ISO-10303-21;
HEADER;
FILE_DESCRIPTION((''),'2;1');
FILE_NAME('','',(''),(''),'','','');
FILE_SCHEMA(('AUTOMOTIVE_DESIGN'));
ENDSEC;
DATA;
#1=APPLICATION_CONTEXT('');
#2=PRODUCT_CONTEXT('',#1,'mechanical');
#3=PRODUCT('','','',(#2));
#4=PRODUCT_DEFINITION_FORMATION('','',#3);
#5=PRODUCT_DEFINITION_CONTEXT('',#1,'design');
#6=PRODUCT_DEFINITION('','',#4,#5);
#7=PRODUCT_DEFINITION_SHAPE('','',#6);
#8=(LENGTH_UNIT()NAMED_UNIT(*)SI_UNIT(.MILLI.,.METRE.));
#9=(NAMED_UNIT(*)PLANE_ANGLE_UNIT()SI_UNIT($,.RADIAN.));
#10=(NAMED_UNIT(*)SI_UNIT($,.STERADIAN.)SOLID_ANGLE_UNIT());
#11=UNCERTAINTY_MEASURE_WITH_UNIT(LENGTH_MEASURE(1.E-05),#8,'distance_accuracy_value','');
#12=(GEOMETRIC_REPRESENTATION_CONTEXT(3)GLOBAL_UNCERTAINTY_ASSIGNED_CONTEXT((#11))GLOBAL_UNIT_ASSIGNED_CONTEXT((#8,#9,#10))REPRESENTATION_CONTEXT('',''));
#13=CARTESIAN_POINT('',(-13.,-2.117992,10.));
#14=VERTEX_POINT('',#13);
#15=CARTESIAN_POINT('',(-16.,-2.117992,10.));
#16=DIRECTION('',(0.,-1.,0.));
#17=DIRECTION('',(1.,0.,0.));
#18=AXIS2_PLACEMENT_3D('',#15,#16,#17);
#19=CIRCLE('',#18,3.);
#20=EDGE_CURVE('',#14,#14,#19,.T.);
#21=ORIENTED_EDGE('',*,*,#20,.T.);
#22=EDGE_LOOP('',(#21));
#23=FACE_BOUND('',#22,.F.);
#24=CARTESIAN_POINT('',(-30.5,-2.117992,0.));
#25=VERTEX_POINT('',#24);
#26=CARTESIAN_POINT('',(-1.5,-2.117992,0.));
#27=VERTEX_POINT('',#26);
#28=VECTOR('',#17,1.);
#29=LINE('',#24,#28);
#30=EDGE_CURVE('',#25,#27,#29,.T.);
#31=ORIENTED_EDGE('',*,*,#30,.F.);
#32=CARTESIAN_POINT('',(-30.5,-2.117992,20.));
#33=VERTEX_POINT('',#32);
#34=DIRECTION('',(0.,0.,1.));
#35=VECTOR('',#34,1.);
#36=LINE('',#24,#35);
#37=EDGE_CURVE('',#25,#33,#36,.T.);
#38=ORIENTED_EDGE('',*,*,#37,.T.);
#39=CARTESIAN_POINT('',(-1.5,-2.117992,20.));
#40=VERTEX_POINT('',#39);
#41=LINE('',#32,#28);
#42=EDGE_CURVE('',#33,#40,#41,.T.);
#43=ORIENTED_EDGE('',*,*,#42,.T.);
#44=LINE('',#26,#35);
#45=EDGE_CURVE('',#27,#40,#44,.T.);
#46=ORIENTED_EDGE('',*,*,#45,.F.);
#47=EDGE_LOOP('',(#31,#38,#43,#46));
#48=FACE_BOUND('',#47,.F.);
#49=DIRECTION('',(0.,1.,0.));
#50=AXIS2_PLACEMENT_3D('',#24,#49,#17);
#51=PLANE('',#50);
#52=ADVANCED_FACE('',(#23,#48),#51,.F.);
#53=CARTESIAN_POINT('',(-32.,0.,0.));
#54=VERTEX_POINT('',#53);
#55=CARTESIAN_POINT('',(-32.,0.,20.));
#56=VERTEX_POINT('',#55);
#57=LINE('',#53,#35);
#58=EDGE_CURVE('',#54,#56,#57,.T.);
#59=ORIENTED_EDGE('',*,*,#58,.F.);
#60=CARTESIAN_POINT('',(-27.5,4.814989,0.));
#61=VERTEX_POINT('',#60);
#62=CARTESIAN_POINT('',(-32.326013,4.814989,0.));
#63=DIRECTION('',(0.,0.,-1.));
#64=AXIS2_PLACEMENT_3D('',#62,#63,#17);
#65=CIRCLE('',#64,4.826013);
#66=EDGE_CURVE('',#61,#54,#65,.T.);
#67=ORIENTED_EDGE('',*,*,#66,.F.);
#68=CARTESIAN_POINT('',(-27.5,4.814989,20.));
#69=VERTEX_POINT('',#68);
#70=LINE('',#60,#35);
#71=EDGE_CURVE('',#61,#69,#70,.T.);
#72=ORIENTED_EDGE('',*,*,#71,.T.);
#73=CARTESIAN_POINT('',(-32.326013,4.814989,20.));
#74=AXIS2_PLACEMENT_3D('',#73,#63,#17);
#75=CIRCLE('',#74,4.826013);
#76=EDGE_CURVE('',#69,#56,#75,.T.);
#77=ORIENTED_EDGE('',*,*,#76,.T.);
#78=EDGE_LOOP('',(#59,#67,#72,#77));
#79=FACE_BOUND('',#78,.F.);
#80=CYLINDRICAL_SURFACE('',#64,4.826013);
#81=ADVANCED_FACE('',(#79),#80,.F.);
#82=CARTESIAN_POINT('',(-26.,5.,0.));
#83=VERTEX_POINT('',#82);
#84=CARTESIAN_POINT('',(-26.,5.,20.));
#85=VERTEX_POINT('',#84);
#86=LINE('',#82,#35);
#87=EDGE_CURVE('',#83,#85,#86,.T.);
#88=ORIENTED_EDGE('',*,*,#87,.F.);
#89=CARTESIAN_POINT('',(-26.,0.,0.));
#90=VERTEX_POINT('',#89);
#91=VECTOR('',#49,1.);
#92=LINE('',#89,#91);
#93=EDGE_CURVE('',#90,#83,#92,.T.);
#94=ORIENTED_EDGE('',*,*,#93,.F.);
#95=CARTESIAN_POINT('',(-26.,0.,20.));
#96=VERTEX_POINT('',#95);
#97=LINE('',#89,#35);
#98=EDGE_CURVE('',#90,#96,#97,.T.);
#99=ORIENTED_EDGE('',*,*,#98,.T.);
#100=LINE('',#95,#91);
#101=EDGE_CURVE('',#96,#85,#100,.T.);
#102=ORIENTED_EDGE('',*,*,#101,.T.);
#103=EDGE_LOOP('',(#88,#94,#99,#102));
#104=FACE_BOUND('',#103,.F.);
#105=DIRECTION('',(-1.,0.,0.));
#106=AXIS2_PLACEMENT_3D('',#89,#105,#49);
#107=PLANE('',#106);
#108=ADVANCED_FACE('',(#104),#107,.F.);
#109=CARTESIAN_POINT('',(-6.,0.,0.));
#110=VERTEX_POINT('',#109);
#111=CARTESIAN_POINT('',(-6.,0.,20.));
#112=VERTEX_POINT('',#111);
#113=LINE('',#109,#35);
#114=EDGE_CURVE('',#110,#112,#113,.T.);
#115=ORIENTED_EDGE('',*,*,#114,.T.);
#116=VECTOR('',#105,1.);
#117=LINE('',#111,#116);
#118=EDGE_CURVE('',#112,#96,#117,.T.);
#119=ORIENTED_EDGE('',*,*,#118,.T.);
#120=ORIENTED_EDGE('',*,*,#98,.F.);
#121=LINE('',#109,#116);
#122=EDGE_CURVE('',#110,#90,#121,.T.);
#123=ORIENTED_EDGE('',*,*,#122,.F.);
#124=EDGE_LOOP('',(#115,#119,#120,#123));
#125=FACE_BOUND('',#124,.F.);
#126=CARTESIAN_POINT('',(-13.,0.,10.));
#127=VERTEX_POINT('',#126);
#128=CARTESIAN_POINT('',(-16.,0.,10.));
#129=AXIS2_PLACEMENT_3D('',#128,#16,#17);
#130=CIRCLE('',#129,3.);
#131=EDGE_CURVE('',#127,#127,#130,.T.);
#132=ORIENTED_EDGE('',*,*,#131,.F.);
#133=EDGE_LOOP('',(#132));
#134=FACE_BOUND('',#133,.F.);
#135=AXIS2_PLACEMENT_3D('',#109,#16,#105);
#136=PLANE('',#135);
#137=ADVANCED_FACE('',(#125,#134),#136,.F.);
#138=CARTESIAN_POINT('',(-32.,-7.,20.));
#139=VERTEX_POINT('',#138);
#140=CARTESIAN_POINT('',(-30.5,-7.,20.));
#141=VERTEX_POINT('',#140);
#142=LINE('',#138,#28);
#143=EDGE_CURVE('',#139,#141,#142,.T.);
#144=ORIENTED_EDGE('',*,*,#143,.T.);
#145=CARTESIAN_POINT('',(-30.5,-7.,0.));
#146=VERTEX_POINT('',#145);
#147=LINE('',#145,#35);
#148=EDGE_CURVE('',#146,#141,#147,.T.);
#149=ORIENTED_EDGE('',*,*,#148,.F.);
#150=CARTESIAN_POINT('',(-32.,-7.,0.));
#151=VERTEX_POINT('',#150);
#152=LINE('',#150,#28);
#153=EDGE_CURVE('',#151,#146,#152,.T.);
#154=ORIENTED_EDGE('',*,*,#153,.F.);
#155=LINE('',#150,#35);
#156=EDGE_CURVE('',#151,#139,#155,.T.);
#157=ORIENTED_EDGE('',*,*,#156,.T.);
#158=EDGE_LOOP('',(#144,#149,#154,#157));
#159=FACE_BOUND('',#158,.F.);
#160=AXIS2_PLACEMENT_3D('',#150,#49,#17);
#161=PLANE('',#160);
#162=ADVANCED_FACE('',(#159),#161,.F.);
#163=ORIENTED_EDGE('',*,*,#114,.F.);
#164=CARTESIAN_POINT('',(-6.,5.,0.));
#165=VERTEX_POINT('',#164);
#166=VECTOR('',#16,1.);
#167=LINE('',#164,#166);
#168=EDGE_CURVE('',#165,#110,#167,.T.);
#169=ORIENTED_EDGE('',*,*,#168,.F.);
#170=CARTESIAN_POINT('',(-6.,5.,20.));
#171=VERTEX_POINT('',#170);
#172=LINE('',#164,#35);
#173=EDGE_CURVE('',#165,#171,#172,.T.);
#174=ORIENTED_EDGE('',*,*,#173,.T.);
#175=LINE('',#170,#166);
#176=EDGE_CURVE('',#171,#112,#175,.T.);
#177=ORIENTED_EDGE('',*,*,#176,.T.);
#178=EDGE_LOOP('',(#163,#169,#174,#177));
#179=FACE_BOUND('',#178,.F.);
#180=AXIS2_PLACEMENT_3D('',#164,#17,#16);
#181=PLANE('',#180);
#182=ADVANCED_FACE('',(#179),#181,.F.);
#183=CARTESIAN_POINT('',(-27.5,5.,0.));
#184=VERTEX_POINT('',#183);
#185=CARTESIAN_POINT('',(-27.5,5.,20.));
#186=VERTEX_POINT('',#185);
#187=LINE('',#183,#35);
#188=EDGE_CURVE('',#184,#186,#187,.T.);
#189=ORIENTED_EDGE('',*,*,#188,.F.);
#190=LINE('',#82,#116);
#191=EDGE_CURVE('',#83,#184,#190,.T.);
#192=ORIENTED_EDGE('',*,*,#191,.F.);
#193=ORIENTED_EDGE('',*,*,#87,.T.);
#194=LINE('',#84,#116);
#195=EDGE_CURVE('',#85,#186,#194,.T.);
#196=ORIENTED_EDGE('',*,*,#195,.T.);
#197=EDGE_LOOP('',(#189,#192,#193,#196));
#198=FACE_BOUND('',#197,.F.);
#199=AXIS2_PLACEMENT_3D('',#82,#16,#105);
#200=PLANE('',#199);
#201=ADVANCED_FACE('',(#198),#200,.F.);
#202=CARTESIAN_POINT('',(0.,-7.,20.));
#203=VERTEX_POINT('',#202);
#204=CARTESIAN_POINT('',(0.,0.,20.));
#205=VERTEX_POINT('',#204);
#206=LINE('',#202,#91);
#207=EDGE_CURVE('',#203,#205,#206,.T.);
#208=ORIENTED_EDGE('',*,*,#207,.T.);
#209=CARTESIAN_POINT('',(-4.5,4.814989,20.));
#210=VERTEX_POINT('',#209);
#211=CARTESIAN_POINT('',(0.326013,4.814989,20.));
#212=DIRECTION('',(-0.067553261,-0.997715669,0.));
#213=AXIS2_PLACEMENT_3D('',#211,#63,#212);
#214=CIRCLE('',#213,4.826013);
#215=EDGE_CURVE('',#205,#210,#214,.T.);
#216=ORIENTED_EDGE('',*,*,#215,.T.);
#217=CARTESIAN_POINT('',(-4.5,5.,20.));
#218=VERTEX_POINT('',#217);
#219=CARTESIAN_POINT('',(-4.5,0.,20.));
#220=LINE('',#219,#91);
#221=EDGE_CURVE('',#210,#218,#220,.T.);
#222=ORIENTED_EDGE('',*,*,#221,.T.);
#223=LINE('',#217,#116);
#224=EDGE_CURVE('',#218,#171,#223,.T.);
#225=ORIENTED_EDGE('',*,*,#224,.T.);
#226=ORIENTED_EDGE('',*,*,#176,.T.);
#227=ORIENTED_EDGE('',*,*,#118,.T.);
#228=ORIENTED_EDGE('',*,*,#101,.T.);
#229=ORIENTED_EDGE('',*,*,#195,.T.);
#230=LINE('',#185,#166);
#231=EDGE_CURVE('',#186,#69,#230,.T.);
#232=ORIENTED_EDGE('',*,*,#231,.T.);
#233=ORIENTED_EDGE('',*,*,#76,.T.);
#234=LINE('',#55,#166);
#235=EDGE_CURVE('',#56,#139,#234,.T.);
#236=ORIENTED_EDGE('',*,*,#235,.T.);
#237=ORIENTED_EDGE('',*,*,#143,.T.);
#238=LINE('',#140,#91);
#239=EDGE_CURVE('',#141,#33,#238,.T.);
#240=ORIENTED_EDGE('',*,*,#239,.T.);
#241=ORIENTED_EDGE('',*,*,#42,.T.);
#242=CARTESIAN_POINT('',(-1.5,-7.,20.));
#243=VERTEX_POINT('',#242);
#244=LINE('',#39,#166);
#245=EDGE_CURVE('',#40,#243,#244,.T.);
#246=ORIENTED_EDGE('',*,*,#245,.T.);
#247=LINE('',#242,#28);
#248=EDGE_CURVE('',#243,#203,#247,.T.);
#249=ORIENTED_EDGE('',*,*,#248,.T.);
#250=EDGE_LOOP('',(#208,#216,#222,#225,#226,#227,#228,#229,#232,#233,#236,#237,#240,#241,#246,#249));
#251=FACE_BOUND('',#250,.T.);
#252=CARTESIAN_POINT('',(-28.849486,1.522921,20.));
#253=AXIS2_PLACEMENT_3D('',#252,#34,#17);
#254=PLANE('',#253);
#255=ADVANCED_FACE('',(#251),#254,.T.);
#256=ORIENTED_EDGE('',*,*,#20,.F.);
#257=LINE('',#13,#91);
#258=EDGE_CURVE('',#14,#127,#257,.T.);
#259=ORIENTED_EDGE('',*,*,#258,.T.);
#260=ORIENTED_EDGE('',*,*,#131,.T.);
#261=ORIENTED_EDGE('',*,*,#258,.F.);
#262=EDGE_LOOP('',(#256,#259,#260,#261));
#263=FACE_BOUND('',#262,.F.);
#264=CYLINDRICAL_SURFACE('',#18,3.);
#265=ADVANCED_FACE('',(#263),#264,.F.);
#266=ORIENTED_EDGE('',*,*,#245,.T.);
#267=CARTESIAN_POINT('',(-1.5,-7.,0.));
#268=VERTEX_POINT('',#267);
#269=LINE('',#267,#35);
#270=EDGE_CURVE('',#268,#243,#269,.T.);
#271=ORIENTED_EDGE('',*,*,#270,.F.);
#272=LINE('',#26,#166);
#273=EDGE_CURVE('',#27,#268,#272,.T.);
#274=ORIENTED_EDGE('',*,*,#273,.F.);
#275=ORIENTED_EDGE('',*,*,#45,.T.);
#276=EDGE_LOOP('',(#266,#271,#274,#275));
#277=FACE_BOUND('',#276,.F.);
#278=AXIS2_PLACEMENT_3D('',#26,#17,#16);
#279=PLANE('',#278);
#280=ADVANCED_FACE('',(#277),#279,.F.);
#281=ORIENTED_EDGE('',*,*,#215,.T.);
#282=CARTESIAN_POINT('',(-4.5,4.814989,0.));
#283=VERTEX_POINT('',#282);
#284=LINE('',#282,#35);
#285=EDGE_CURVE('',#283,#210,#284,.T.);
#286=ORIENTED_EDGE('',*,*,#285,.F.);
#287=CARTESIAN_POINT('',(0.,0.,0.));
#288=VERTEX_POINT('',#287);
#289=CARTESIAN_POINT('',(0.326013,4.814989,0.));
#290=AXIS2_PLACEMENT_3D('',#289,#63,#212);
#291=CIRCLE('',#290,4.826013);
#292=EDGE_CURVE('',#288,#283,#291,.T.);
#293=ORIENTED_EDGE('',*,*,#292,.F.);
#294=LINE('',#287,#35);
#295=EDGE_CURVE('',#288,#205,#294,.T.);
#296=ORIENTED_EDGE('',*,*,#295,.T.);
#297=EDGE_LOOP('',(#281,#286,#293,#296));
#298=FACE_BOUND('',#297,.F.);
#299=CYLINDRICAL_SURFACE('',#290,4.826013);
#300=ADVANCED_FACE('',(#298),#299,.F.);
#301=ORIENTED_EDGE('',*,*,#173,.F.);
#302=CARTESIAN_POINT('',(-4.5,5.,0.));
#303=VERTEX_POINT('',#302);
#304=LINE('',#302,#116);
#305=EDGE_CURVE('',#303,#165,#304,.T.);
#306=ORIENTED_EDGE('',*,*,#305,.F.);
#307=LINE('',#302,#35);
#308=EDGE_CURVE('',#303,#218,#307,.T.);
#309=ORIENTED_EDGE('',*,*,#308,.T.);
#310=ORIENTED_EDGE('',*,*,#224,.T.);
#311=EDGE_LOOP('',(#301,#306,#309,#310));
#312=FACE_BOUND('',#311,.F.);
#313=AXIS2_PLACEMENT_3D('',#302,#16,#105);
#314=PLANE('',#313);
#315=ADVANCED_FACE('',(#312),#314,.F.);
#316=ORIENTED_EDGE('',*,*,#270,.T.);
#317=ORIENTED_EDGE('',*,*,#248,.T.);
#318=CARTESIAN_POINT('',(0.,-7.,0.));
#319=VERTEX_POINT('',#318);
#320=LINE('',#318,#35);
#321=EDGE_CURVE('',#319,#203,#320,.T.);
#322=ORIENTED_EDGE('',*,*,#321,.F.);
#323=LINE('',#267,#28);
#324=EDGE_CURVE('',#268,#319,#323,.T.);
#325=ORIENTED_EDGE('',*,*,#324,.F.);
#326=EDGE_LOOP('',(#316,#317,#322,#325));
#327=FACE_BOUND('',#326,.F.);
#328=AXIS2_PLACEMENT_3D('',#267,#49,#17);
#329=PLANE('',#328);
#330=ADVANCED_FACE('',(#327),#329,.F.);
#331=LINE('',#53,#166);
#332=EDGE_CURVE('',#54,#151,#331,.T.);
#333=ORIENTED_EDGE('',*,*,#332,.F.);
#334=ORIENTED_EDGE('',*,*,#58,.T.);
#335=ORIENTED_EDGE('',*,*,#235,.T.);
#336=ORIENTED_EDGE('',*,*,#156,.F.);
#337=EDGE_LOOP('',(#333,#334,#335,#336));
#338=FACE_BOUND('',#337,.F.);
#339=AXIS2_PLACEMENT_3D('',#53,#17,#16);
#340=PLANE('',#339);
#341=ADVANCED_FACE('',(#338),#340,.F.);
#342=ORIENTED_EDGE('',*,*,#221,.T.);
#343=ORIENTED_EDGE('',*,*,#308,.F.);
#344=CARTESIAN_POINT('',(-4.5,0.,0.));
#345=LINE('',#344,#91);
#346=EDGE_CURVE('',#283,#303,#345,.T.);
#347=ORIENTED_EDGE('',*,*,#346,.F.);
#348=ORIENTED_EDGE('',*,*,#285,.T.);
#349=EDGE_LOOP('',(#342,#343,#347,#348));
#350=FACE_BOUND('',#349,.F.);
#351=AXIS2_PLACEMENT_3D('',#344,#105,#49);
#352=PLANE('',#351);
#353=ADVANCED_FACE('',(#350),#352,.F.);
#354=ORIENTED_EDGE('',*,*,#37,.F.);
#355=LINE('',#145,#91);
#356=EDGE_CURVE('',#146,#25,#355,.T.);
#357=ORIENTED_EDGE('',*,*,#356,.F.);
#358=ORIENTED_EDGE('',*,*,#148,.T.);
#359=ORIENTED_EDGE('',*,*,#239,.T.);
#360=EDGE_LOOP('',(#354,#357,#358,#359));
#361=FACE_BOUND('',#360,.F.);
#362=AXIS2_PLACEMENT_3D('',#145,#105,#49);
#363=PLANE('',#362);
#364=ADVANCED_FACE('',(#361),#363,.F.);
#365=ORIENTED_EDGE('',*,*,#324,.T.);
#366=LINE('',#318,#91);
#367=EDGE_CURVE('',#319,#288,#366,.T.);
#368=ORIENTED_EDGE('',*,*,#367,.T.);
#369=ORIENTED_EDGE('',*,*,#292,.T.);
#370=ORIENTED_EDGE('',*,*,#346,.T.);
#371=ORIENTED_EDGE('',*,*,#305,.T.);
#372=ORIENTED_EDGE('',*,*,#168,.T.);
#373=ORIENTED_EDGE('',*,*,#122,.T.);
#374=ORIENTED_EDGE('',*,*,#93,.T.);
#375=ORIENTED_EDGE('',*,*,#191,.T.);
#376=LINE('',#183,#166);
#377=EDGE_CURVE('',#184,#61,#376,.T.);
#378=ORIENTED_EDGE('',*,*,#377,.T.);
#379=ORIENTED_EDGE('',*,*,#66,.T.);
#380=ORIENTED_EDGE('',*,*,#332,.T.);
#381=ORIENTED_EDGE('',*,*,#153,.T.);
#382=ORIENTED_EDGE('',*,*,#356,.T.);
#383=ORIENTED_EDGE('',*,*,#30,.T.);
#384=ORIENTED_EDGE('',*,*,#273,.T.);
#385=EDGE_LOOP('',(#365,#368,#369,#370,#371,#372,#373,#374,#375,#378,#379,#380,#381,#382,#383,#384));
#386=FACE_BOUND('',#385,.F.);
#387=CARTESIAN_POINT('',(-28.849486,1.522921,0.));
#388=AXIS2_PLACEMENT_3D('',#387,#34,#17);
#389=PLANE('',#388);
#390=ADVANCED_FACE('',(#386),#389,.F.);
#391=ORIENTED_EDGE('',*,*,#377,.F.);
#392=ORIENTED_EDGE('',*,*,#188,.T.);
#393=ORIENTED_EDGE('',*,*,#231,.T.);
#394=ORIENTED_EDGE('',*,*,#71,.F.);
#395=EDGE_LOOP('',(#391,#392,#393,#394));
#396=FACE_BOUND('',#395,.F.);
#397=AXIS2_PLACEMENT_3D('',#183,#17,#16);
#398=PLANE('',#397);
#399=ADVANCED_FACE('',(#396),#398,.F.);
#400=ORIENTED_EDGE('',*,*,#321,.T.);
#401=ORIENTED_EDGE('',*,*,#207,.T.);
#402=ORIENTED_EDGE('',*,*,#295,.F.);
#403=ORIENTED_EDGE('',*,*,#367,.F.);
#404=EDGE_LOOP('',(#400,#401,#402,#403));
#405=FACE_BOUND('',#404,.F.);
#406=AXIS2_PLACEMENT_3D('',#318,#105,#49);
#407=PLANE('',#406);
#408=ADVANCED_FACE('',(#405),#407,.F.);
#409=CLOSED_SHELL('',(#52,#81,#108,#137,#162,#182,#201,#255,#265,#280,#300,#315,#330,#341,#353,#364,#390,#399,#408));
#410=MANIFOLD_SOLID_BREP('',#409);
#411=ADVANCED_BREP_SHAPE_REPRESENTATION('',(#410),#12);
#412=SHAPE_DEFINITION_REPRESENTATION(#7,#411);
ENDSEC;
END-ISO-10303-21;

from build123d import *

# Parameters (mm, degrees)
F1_DEPTH    = 20
F2_T1_DEPTH = 20
F3_R        = 3
F4_DEPTH    = 25


# Not quite as in the source:
# - a fillet or chamfer that OpenCascade refuses, or shapes differently, is made with other operations: its cross-section is extruded or revolved along the edge and cut away or added


with BuildPart() as f1:
    # F0 (on Top) → F1 (new body)
    with BuildSketch(Plane.XY):
        Polygon((0, -7), (0, 0), (-4.5, 0), (-4.5, 5), (-6, 5), (-6, 0), (-26, 0), (-26, 5), (-27.5, 5), (-27.5, 0), (-32, 0), (-32, -7), (-30.5, -7), (-30.5, -2.1179924456), (-1.5, -2.1179924456), (-1.5, -7), align=None)
    extrude(amount=F1_DEPTH)

    # F2: fillet of radius 4.8260129112 on 2 edges, made by hand

    # F2_s2 → F2_t1 (join)
    with BuildSketch(Plane.XY):
        with BuildLine():
            ThreePointArc((-27.5, 4.814988702), (-28.8001269844, 1.5197604777), (-32, 0))
            Line((-32, 0), (-27.5, 0))
            Line((-27.5, 0), (-27.5, 4.814988702))
        make_face()
        with BuildLine():
            ThreePointArc((0, 0), (-3.1998730156, 1.5197604777), (-4.5, 4.814988702))
            Line((-4.5, 4.814988702), (-4.5, 0))
            Line((-4.5, 0), (0, 0))
        make_face()
    extrude(amount=F2_T1_DEPTH)

    # F3 (on face) → F4 (cut)
    with BuildSketch(Plane.XZ.offset(2.1179924456)):
        with Locations((-16, 10)):
            Circle(F3_R)
    extrude(amount=-F4_DEPTH, mode=Mode.SUBTRACT)


solid = f1.part
